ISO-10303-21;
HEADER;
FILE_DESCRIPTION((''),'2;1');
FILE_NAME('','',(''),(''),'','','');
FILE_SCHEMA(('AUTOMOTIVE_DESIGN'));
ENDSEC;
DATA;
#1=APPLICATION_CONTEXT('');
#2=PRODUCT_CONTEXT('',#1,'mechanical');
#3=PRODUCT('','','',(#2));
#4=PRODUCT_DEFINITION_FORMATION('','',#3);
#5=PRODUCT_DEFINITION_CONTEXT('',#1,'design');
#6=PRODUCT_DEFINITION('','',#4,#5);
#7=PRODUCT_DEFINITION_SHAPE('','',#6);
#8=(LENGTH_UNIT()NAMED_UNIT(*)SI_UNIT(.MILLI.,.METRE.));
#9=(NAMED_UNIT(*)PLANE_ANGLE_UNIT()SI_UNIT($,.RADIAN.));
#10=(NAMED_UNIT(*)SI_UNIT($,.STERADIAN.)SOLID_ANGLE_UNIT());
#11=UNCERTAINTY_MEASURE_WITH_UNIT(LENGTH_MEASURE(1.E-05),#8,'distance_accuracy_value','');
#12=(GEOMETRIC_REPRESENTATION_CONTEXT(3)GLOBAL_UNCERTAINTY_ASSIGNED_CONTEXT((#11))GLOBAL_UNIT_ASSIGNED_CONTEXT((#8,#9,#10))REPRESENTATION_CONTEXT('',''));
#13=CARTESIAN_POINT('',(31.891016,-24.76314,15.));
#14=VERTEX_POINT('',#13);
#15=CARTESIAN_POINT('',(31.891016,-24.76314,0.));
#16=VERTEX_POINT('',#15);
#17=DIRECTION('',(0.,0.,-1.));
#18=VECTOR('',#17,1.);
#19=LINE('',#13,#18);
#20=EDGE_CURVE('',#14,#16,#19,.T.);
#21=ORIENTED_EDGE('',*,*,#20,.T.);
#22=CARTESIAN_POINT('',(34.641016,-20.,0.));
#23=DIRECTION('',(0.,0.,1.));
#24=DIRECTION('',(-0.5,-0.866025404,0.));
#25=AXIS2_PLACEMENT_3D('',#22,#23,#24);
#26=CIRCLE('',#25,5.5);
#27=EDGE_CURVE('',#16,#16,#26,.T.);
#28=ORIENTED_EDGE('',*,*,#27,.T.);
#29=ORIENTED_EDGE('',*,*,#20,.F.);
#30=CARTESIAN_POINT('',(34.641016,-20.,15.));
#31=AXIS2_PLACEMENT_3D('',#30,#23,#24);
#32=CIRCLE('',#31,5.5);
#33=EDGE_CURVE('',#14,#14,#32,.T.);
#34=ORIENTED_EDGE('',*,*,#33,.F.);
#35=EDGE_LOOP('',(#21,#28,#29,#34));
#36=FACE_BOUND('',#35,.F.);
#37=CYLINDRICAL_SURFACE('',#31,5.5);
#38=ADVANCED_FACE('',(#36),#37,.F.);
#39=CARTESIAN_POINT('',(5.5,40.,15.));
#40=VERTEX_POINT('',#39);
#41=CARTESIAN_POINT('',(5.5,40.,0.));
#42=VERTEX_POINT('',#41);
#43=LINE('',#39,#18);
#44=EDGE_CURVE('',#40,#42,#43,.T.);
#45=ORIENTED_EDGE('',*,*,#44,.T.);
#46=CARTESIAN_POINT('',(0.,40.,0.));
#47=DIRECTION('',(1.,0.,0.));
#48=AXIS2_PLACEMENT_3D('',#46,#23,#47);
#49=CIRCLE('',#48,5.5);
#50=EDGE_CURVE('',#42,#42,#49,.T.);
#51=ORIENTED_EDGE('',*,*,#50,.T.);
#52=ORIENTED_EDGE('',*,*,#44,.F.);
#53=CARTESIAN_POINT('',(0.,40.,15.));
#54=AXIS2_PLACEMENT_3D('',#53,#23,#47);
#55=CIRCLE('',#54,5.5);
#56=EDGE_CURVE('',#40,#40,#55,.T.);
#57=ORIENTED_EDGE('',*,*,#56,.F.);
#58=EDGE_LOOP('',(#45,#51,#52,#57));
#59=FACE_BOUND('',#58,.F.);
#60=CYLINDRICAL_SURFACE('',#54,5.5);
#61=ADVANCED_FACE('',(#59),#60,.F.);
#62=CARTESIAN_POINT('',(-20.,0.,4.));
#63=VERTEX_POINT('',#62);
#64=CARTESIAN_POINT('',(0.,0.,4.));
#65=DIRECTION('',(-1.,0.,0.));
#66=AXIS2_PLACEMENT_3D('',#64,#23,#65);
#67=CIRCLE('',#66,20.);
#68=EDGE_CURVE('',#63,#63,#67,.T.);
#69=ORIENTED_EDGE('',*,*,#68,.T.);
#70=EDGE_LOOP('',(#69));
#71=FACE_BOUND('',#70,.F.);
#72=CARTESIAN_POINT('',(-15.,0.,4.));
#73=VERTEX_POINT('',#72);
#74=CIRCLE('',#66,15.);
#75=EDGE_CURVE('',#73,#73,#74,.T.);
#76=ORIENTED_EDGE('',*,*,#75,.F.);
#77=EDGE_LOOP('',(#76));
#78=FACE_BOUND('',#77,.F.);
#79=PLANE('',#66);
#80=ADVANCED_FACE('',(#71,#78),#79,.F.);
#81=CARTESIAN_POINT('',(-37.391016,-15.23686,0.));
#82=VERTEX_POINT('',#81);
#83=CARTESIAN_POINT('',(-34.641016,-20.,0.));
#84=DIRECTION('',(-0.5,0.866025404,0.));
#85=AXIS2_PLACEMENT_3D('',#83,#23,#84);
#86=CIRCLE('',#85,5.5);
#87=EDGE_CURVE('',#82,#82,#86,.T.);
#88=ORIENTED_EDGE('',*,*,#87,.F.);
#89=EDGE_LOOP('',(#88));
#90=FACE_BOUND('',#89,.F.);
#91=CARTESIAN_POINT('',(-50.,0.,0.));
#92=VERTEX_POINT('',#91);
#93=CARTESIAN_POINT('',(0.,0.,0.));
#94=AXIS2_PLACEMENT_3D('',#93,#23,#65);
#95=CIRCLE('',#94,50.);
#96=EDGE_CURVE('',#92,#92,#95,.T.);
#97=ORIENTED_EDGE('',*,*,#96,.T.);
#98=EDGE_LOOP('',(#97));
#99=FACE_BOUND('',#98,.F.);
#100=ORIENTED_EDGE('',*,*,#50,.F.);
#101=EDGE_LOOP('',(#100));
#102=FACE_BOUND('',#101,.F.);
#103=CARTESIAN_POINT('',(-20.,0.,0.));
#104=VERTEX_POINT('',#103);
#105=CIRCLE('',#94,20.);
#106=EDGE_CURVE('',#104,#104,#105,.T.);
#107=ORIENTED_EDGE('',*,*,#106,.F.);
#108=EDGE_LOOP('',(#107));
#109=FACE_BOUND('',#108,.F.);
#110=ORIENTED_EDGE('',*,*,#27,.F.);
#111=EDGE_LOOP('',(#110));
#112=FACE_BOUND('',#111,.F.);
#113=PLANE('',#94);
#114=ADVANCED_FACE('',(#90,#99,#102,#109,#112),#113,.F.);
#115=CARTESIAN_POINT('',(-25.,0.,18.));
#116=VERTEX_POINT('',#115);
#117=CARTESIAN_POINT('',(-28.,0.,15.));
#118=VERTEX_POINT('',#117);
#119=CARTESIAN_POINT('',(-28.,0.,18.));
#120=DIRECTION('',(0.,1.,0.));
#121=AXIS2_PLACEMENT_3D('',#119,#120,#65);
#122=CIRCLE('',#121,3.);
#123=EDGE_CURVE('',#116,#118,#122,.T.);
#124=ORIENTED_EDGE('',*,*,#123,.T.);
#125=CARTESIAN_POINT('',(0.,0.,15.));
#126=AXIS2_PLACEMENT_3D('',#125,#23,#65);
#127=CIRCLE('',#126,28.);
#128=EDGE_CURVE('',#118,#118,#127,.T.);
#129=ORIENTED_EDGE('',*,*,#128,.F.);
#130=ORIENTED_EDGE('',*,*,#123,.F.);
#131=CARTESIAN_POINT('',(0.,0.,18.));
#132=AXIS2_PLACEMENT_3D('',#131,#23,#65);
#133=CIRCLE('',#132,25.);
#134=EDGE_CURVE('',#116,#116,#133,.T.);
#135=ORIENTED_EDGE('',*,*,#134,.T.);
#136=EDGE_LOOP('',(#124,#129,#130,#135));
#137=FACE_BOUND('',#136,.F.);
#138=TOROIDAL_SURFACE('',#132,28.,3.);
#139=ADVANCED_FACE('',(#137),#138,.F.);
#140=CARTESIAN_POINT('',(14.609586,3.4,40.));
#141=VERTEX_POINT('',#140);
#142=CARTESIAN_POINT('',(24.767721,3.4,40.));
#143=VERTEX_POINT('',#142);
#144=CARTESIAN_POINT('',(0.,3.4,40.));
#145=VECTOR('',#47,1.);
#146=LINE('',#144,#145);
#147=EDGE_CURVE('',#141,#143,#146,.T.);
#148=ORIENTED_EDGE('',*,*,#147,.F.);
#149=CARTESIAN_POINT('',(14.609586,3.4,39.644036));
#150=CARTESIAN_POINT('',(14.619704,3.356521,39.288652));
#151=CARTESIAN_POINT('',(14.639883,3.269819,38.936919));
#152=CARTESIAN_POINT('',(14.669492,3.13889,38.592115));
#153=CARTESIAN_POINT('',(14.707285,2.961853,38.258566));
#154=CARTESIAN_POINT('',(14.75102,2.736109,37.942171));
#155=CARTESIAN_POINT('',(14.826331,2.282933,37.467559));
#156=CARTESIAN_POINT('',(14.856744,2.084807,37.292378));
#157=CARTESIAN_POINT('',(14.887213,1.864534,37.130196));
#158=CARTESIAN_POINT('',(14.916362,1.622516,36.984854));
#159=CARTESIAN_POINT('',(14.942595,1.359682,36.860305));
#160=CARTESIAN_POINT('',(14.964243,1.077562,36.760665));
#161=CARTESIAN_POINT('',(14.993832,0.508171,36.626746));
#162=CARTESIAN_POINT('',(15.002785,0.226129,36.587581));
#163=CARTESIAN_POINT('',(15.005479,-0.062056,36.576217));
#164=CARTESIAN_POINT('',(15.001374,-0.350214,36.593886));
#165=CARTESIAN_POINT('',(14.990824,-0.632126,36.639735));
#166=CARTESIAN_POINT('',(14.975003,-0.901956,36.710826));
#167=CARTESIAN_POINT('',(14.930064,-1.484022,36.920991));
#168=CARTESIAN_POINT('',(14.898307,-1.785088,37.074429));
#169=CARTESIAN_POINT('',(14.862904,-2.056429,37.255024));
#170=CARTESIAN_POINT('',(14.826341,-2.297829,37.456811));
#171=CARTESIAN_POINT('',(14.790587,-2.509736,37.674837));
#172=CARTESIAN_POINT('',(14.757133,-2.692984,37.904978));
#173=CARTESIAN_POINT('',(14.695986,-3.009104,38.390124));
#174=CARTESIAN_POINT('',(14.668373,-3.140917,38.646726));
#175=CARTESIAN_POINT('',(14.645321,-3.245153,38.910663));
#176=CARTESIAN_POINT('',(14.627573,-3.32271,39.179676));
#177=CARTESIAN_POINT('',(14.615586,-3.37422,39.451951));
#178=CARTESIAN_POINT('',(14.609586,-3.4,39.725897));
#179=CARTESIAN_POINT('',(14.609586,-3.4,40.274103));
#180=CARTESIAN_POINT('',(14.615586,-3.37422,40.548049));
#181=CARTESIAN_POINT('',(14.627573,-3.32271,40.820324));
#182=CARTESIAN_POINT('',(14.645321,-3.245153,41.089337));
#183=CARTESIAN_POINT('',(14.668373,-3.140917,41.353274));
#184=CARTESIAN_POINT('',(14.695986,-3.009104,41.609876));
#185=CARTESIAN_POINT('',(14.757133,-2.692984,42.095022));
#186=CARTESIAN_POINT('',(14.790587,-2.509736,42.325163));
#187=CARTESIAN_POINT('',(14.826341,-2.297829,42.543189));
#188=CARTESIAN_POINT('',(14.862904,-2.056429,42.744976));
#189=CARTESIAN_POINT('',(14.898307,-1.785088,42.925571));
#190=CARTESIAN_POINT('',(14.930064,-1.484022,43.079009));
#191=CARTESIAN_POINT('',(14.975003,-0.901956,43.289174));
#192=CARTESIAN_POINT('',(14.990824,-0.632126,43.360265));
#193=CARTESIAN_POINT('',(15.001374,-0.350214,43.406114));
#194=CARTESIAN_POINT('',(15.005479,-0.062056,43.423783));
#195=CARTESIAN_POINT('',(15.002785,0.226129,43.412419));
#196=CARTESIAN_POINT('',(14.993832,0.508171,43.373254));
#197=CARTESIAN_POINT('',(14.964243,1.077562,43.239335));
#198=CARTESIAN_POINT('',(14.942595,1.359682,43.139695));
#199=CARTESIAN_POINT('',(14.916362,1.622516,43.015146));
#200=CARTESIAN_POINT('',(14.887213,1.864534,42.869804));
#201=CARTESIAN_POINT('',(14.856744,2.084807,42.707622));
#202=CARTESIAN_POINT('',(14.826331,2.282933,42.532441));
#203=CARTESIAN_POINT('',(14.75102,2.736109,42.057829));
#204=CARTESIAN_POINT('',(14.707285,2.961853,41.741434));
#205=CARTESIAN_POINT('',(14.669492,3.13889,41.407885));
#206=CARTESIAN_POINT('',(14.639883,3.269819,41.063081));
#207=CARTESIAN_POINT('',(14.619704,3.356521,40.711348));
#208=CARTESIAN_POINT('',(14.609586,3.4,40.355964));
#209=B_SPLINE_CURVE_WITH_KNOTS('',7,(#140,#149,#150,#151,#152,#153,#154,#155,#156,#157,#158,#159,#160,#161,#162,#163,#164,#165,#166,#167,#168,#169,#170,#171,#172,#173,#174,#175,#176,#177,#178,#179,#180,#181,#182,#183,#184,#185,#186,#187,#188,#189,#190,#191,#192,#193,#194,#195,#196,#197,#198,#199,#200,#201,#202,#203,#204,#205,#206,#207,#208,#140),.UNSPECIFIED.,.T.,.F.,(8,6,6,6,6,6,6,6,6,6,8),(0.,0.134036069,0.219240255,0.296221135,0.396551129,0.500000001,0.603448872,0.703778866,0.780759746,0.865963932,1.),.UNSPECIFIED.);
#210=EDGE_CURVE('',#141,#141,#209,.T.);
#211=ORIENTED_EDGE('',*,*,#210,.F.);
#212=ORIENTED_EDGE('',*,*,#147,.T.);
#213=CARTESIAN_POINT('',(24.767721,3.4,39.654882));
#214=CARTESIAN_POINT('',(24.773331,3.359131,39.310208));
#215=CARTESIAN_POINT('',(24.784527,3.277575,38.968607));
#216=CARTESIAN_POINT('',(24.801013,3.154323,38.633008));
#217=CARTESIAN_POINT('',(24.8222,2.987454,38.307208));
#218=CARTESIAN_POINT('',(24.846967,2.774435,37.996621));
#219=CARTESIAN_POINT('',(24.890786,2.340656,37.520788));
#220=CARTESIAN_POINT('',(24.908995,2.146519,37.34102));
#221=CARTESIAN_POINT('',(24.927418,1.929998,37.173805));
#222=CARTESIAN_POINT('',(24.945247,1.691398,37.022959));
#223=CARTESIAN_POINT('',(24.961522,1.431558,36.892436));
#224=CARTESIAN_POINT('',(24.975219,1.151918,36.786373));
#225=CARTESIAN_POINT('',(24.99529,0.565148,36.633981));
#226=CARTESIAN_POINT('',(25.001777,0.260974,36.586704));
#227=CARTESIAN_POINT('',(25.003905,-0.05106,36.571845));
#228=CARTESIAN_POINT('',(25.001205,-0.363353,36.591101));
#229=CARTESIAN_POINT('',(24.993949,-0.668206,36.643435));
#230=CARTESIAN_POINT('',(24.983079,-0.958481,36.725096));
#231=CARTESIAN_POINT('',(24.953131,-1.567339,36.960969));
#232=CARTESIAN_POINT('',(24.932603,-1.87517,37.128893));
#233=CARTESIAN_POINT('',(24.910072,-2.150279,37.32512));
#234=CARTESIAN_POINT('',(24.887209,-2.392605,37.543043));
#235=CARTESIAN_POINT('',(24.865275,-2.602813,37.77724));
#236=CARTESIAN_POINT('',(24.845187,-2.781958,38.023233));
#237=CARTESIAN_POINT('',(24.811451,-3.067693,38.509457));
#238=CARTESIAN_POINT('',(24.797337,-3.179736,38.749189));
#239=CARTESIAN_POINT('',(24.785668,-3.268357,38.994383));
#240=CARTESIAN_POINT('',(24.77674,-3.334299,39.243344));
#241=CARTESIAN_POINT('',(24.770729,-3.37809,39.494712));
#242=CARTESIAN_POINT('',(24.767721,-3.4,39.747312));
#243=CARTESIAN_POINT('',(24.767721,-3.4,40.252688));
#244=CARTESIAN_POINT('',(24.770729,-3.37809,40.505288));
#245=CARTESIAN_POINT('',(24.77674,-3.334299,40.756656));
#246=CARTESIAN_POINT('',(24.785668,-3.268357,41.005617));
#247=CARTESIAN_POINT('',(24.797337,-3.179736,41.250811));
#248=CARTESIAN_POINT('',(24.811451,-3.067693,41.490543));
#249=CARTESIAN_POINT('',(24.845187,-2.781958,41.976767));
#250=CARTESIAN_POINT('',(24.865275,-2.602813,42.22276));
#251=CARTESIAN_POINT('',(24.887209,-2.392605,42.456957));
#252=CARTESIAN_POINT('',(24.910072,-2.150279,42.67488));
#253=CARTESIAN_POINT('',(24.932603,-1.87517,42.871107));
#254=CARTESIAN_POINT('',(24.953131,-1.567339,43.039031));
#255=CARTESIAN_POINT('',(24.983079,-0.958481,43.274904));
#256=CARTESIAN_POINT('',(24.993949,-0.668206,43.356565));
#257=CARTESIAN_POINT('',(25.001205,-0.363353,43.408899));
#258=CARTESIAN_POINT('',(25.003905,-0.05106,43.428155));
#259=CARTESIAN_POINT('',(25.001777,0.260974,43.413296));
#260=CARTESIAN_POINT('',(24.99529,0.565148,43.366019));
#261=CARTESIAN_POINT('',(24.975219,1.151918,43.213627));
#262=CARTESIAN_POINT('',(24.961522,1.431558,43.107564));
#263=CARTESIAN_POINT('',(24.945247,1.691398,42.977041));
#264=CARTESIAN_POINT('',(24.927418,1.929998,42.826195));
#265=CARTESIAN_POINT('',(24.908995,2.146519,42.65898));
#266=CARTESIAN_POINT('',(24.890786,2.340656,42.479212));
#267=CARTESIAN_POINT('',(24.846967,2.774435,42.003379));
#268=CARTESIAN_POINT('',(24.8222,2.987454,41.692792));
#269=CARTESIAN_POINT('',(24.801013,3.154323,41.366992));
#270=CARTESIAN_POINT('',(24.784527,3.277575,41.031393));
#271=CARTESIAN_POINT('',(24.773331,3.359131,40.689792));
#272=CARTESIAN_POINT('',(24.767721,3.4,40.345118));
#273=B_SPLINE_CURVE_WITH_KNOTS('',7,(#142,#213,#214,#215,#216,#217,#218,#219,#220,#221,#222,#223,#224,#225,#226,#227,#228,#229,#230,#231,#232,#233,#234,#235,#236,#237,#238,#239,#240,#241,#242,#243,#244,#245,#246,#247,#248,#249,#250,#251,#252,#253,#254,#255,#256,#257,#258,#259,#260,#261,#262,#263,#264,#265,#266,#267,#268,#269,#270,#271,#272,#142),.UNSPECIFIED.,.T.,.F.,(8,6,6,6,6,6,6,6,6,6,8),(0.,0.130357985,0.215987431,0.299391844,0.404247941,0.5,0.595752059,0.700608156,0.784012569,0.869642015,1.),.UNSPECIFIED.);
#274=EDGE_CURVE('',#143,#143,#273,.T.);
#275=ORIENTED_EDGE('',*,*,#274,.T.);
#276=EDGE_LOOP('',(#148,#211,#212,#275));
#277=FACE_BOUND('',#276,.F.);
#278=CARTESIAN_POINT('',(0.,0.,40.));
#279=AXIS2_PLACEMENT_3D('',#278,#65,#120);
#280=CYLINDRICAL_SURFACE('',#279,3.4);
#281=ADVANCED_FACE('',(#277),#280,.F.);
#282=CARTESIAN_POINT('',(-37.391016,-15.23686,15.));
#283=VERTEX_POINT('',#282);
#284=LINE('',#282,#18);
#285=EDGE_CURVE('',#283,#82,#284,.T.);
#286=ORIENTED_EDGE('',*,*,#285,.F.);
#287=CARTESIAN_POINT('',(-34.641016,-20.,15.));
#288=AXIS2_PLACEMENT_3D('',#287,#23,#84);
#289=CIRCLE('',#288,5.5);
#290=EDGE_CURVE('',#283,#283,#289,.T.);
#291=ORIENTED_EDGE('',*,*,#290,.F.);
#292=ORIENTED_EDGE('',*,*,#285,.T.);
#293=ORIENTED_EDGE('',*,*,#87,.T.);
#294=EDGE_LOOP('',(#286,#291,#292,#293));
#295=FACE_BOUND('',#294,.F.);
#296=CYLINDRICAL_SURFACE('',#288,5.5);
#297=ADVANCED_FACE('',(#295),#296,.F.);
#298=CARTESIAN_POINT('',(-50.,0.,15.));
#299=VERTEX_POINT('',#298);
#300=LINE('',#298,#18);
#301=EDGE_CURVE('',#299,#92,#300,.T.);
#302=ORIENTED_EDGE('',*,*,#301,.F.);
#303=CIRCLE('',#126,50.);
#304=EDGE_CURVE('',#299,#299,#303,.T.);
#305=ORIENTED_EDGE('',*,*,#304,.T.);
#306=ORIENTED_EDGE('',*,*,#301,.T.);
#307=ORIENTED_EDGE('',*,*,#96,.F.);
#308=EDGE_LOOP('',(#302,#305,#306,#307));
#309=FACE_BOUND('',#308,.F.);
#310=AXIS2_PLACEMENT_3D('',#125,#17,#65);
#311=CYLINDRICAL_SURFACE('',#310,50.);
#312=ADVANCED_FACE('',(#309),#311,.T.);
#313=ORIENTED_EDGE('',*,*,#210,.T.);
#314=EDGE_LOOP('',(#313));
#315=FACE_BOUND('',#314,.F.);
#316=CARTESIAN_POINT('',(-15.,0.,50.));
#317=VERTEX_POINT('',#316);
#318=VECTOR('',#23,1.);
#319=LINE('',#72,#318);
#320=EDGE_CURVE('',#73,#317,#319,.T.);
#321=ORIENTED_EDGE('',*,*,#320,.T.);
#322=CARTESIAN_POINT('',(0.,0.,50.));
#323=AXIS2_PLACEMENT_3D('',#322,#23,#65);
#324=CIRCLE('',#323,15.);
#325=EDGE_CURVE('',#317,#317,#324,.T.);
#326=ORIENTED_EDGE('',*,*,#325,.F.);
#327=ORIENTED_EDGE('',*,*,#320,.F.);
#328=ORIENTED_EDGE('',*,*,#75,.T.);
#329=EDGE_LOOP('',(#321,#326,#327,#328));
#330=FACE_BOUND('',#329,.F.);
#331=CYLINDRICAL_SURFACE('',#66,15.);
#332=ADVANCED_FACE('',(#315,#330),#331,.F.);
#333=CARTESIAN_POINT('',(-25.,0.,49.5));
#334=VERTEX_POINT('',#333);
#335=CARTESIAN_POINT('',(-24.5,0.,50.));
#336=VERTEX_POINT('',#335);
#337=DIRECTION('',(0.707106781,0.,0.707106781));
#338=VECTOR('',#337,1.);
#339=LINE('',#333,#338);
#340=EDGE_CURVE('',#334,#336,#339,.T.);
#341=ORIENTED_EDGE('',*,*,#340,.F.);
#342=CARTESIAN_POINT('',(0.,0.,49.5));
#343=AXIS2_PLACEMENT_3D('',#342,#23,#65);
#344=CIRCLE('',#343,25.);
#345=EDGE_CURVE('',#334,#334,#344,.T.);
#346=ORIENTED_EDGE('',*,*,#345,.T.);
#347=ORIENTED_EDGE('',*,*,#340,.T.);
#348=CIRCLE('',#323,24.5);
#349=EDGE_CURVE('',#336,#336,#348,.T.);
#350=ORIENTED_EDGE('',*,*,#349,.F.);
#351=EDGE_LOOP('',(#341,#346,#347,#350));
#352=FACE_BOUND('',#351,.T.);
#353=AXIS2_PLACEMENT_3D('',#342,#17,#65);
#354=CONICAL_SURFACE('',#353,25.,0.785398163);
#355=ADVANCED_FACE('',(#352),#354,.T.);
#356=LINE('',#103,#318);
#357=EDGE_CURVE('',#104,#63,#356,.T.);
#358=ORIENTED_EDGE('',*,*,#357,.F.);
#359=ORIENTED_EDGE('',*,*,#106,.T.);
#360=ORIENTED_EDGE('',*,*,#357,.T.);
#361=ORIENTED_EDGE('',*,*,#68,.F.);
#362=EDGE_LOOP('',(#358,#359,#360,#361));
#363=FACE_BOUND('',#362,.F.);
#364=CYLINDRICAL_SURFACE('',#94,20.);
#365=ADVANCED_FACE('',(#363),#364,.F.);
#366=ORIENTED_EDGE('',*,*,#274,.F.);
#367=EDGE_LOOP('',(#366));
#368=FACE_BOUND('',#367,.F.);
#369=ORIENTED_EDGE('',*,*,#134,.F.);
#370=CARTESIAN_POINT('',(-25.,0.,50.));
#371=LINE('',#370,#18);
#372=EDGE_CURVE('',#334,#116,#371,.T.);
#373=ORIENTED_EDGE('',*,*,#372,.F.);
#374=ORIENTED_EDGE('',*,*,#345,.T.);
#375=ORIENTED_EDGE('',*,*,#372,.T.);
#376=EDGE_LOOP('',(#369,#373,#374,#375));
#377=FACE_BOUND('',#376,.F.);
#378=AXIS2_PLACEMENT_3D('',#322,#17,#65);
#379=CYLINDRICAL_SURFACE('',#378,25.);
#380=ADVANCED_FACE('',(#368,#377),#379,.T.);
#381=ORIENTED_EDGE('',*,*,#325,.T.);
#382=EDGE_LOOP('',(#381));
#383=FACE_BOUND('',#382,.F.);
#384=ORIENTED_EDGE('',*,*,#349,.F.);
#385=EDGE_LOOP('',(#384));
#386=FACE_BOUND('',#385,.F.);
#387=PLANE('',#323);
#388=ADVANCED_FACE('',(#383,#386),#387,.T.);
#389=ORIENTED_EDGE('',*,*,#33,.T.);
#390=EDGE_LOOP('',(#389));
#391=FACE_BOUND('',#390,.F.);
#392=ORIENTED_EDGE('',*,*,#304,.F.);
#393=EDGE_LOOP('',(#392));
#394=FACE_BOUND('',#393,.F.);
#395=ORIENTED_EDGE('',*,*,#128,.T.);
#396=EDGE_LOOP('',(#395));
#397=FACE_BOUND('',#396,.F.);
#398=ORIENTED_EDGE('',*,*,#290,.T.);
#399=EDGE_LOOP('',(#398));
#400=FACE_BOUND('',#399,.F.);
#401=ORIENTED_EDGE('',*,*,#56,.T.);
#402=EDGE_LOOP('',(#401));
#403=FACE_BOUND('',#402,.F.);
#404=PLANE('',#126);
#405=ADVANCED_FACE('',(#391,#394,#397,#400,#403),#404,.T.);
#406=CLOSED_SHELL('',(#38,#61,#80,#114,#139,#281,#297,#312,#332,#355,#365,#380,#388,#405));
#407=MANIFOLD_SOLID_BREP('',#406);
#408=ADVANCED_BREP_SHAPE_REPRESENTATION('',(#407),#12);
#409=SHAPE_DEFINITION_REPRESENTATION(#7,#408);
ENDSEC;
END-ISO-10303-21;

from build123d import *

# Parameters (mm, degrees)
F2_R            = 3
F4_D            = 6.8
F4_DEPTH        = 50.001
F5_R            = 5.5
F6_DEPTH        = 15.001
F6_COPIES_COUNT = 3
F7_SIZE         = 0.5


# Not quite as in the source:
# - a pattern or mirror of a feature is missing from the dataset's text; its kind, count and spacing are read off the source's solid


with BuildPart() as f1:
    # F0 (on Front) → F1 (revolve)
    with BuildSketch(Plane.XZ):
        Polygon((-15, 4), (-15, 50), (-25, 50), (-25, 15), (-50, 15), (-50, 0), (-20, 0), (-20, 4), align=None)
    revolve(axis=Axis((0, 0, 33.7237479181), (0, 0, 1)))

    # F2
    f2_edges = [f1.edges().sort_by_distance(p)[0] for p in [
        (25, 0, 15),
    ]]
    fillet(f2_edges, radius=F2_R)

    # F4 (through all, one way)
    with BuildSketch(Plane(origin=(0, 0, 0), x_dir=(0, 1, 0), z_dir=(-1, 0, 0))):
        with Locations((0, -40)):
            Circle(F4_D / 2)
    extrude(amount=-F4_DEPTH, mode=Mode.SUBTRACT)

    # F5 (on face) → F6 (cut, through all)
    with BuildSketch(Plane.XY.offset(15)):
        with Locations((0, 40)):
            Circle(F5_R)
    f6 = extrude(amount=-F6_DEPTH, mode=Mode.SUBTRACT)

    # F6_copies: F6 ×3 about axis
    f6_copies_axis = Axis((0, 0, 0), (0, 0, 1))
    for i in range(1, F6_COPIES_COUNT):
        add(f6.rotate(f6_copies_axis, i * 360 / F6_COPIES_COUNT), mode=Mode.SUBTRACT)

    # F7
    f7_edges = [f1.edges().sort_by_distance(p)[0] for p in [
        (25, 0, 50),
    ]]
    chamfer(f7_edges, length=F7_SIZE)


solid = f1.part
